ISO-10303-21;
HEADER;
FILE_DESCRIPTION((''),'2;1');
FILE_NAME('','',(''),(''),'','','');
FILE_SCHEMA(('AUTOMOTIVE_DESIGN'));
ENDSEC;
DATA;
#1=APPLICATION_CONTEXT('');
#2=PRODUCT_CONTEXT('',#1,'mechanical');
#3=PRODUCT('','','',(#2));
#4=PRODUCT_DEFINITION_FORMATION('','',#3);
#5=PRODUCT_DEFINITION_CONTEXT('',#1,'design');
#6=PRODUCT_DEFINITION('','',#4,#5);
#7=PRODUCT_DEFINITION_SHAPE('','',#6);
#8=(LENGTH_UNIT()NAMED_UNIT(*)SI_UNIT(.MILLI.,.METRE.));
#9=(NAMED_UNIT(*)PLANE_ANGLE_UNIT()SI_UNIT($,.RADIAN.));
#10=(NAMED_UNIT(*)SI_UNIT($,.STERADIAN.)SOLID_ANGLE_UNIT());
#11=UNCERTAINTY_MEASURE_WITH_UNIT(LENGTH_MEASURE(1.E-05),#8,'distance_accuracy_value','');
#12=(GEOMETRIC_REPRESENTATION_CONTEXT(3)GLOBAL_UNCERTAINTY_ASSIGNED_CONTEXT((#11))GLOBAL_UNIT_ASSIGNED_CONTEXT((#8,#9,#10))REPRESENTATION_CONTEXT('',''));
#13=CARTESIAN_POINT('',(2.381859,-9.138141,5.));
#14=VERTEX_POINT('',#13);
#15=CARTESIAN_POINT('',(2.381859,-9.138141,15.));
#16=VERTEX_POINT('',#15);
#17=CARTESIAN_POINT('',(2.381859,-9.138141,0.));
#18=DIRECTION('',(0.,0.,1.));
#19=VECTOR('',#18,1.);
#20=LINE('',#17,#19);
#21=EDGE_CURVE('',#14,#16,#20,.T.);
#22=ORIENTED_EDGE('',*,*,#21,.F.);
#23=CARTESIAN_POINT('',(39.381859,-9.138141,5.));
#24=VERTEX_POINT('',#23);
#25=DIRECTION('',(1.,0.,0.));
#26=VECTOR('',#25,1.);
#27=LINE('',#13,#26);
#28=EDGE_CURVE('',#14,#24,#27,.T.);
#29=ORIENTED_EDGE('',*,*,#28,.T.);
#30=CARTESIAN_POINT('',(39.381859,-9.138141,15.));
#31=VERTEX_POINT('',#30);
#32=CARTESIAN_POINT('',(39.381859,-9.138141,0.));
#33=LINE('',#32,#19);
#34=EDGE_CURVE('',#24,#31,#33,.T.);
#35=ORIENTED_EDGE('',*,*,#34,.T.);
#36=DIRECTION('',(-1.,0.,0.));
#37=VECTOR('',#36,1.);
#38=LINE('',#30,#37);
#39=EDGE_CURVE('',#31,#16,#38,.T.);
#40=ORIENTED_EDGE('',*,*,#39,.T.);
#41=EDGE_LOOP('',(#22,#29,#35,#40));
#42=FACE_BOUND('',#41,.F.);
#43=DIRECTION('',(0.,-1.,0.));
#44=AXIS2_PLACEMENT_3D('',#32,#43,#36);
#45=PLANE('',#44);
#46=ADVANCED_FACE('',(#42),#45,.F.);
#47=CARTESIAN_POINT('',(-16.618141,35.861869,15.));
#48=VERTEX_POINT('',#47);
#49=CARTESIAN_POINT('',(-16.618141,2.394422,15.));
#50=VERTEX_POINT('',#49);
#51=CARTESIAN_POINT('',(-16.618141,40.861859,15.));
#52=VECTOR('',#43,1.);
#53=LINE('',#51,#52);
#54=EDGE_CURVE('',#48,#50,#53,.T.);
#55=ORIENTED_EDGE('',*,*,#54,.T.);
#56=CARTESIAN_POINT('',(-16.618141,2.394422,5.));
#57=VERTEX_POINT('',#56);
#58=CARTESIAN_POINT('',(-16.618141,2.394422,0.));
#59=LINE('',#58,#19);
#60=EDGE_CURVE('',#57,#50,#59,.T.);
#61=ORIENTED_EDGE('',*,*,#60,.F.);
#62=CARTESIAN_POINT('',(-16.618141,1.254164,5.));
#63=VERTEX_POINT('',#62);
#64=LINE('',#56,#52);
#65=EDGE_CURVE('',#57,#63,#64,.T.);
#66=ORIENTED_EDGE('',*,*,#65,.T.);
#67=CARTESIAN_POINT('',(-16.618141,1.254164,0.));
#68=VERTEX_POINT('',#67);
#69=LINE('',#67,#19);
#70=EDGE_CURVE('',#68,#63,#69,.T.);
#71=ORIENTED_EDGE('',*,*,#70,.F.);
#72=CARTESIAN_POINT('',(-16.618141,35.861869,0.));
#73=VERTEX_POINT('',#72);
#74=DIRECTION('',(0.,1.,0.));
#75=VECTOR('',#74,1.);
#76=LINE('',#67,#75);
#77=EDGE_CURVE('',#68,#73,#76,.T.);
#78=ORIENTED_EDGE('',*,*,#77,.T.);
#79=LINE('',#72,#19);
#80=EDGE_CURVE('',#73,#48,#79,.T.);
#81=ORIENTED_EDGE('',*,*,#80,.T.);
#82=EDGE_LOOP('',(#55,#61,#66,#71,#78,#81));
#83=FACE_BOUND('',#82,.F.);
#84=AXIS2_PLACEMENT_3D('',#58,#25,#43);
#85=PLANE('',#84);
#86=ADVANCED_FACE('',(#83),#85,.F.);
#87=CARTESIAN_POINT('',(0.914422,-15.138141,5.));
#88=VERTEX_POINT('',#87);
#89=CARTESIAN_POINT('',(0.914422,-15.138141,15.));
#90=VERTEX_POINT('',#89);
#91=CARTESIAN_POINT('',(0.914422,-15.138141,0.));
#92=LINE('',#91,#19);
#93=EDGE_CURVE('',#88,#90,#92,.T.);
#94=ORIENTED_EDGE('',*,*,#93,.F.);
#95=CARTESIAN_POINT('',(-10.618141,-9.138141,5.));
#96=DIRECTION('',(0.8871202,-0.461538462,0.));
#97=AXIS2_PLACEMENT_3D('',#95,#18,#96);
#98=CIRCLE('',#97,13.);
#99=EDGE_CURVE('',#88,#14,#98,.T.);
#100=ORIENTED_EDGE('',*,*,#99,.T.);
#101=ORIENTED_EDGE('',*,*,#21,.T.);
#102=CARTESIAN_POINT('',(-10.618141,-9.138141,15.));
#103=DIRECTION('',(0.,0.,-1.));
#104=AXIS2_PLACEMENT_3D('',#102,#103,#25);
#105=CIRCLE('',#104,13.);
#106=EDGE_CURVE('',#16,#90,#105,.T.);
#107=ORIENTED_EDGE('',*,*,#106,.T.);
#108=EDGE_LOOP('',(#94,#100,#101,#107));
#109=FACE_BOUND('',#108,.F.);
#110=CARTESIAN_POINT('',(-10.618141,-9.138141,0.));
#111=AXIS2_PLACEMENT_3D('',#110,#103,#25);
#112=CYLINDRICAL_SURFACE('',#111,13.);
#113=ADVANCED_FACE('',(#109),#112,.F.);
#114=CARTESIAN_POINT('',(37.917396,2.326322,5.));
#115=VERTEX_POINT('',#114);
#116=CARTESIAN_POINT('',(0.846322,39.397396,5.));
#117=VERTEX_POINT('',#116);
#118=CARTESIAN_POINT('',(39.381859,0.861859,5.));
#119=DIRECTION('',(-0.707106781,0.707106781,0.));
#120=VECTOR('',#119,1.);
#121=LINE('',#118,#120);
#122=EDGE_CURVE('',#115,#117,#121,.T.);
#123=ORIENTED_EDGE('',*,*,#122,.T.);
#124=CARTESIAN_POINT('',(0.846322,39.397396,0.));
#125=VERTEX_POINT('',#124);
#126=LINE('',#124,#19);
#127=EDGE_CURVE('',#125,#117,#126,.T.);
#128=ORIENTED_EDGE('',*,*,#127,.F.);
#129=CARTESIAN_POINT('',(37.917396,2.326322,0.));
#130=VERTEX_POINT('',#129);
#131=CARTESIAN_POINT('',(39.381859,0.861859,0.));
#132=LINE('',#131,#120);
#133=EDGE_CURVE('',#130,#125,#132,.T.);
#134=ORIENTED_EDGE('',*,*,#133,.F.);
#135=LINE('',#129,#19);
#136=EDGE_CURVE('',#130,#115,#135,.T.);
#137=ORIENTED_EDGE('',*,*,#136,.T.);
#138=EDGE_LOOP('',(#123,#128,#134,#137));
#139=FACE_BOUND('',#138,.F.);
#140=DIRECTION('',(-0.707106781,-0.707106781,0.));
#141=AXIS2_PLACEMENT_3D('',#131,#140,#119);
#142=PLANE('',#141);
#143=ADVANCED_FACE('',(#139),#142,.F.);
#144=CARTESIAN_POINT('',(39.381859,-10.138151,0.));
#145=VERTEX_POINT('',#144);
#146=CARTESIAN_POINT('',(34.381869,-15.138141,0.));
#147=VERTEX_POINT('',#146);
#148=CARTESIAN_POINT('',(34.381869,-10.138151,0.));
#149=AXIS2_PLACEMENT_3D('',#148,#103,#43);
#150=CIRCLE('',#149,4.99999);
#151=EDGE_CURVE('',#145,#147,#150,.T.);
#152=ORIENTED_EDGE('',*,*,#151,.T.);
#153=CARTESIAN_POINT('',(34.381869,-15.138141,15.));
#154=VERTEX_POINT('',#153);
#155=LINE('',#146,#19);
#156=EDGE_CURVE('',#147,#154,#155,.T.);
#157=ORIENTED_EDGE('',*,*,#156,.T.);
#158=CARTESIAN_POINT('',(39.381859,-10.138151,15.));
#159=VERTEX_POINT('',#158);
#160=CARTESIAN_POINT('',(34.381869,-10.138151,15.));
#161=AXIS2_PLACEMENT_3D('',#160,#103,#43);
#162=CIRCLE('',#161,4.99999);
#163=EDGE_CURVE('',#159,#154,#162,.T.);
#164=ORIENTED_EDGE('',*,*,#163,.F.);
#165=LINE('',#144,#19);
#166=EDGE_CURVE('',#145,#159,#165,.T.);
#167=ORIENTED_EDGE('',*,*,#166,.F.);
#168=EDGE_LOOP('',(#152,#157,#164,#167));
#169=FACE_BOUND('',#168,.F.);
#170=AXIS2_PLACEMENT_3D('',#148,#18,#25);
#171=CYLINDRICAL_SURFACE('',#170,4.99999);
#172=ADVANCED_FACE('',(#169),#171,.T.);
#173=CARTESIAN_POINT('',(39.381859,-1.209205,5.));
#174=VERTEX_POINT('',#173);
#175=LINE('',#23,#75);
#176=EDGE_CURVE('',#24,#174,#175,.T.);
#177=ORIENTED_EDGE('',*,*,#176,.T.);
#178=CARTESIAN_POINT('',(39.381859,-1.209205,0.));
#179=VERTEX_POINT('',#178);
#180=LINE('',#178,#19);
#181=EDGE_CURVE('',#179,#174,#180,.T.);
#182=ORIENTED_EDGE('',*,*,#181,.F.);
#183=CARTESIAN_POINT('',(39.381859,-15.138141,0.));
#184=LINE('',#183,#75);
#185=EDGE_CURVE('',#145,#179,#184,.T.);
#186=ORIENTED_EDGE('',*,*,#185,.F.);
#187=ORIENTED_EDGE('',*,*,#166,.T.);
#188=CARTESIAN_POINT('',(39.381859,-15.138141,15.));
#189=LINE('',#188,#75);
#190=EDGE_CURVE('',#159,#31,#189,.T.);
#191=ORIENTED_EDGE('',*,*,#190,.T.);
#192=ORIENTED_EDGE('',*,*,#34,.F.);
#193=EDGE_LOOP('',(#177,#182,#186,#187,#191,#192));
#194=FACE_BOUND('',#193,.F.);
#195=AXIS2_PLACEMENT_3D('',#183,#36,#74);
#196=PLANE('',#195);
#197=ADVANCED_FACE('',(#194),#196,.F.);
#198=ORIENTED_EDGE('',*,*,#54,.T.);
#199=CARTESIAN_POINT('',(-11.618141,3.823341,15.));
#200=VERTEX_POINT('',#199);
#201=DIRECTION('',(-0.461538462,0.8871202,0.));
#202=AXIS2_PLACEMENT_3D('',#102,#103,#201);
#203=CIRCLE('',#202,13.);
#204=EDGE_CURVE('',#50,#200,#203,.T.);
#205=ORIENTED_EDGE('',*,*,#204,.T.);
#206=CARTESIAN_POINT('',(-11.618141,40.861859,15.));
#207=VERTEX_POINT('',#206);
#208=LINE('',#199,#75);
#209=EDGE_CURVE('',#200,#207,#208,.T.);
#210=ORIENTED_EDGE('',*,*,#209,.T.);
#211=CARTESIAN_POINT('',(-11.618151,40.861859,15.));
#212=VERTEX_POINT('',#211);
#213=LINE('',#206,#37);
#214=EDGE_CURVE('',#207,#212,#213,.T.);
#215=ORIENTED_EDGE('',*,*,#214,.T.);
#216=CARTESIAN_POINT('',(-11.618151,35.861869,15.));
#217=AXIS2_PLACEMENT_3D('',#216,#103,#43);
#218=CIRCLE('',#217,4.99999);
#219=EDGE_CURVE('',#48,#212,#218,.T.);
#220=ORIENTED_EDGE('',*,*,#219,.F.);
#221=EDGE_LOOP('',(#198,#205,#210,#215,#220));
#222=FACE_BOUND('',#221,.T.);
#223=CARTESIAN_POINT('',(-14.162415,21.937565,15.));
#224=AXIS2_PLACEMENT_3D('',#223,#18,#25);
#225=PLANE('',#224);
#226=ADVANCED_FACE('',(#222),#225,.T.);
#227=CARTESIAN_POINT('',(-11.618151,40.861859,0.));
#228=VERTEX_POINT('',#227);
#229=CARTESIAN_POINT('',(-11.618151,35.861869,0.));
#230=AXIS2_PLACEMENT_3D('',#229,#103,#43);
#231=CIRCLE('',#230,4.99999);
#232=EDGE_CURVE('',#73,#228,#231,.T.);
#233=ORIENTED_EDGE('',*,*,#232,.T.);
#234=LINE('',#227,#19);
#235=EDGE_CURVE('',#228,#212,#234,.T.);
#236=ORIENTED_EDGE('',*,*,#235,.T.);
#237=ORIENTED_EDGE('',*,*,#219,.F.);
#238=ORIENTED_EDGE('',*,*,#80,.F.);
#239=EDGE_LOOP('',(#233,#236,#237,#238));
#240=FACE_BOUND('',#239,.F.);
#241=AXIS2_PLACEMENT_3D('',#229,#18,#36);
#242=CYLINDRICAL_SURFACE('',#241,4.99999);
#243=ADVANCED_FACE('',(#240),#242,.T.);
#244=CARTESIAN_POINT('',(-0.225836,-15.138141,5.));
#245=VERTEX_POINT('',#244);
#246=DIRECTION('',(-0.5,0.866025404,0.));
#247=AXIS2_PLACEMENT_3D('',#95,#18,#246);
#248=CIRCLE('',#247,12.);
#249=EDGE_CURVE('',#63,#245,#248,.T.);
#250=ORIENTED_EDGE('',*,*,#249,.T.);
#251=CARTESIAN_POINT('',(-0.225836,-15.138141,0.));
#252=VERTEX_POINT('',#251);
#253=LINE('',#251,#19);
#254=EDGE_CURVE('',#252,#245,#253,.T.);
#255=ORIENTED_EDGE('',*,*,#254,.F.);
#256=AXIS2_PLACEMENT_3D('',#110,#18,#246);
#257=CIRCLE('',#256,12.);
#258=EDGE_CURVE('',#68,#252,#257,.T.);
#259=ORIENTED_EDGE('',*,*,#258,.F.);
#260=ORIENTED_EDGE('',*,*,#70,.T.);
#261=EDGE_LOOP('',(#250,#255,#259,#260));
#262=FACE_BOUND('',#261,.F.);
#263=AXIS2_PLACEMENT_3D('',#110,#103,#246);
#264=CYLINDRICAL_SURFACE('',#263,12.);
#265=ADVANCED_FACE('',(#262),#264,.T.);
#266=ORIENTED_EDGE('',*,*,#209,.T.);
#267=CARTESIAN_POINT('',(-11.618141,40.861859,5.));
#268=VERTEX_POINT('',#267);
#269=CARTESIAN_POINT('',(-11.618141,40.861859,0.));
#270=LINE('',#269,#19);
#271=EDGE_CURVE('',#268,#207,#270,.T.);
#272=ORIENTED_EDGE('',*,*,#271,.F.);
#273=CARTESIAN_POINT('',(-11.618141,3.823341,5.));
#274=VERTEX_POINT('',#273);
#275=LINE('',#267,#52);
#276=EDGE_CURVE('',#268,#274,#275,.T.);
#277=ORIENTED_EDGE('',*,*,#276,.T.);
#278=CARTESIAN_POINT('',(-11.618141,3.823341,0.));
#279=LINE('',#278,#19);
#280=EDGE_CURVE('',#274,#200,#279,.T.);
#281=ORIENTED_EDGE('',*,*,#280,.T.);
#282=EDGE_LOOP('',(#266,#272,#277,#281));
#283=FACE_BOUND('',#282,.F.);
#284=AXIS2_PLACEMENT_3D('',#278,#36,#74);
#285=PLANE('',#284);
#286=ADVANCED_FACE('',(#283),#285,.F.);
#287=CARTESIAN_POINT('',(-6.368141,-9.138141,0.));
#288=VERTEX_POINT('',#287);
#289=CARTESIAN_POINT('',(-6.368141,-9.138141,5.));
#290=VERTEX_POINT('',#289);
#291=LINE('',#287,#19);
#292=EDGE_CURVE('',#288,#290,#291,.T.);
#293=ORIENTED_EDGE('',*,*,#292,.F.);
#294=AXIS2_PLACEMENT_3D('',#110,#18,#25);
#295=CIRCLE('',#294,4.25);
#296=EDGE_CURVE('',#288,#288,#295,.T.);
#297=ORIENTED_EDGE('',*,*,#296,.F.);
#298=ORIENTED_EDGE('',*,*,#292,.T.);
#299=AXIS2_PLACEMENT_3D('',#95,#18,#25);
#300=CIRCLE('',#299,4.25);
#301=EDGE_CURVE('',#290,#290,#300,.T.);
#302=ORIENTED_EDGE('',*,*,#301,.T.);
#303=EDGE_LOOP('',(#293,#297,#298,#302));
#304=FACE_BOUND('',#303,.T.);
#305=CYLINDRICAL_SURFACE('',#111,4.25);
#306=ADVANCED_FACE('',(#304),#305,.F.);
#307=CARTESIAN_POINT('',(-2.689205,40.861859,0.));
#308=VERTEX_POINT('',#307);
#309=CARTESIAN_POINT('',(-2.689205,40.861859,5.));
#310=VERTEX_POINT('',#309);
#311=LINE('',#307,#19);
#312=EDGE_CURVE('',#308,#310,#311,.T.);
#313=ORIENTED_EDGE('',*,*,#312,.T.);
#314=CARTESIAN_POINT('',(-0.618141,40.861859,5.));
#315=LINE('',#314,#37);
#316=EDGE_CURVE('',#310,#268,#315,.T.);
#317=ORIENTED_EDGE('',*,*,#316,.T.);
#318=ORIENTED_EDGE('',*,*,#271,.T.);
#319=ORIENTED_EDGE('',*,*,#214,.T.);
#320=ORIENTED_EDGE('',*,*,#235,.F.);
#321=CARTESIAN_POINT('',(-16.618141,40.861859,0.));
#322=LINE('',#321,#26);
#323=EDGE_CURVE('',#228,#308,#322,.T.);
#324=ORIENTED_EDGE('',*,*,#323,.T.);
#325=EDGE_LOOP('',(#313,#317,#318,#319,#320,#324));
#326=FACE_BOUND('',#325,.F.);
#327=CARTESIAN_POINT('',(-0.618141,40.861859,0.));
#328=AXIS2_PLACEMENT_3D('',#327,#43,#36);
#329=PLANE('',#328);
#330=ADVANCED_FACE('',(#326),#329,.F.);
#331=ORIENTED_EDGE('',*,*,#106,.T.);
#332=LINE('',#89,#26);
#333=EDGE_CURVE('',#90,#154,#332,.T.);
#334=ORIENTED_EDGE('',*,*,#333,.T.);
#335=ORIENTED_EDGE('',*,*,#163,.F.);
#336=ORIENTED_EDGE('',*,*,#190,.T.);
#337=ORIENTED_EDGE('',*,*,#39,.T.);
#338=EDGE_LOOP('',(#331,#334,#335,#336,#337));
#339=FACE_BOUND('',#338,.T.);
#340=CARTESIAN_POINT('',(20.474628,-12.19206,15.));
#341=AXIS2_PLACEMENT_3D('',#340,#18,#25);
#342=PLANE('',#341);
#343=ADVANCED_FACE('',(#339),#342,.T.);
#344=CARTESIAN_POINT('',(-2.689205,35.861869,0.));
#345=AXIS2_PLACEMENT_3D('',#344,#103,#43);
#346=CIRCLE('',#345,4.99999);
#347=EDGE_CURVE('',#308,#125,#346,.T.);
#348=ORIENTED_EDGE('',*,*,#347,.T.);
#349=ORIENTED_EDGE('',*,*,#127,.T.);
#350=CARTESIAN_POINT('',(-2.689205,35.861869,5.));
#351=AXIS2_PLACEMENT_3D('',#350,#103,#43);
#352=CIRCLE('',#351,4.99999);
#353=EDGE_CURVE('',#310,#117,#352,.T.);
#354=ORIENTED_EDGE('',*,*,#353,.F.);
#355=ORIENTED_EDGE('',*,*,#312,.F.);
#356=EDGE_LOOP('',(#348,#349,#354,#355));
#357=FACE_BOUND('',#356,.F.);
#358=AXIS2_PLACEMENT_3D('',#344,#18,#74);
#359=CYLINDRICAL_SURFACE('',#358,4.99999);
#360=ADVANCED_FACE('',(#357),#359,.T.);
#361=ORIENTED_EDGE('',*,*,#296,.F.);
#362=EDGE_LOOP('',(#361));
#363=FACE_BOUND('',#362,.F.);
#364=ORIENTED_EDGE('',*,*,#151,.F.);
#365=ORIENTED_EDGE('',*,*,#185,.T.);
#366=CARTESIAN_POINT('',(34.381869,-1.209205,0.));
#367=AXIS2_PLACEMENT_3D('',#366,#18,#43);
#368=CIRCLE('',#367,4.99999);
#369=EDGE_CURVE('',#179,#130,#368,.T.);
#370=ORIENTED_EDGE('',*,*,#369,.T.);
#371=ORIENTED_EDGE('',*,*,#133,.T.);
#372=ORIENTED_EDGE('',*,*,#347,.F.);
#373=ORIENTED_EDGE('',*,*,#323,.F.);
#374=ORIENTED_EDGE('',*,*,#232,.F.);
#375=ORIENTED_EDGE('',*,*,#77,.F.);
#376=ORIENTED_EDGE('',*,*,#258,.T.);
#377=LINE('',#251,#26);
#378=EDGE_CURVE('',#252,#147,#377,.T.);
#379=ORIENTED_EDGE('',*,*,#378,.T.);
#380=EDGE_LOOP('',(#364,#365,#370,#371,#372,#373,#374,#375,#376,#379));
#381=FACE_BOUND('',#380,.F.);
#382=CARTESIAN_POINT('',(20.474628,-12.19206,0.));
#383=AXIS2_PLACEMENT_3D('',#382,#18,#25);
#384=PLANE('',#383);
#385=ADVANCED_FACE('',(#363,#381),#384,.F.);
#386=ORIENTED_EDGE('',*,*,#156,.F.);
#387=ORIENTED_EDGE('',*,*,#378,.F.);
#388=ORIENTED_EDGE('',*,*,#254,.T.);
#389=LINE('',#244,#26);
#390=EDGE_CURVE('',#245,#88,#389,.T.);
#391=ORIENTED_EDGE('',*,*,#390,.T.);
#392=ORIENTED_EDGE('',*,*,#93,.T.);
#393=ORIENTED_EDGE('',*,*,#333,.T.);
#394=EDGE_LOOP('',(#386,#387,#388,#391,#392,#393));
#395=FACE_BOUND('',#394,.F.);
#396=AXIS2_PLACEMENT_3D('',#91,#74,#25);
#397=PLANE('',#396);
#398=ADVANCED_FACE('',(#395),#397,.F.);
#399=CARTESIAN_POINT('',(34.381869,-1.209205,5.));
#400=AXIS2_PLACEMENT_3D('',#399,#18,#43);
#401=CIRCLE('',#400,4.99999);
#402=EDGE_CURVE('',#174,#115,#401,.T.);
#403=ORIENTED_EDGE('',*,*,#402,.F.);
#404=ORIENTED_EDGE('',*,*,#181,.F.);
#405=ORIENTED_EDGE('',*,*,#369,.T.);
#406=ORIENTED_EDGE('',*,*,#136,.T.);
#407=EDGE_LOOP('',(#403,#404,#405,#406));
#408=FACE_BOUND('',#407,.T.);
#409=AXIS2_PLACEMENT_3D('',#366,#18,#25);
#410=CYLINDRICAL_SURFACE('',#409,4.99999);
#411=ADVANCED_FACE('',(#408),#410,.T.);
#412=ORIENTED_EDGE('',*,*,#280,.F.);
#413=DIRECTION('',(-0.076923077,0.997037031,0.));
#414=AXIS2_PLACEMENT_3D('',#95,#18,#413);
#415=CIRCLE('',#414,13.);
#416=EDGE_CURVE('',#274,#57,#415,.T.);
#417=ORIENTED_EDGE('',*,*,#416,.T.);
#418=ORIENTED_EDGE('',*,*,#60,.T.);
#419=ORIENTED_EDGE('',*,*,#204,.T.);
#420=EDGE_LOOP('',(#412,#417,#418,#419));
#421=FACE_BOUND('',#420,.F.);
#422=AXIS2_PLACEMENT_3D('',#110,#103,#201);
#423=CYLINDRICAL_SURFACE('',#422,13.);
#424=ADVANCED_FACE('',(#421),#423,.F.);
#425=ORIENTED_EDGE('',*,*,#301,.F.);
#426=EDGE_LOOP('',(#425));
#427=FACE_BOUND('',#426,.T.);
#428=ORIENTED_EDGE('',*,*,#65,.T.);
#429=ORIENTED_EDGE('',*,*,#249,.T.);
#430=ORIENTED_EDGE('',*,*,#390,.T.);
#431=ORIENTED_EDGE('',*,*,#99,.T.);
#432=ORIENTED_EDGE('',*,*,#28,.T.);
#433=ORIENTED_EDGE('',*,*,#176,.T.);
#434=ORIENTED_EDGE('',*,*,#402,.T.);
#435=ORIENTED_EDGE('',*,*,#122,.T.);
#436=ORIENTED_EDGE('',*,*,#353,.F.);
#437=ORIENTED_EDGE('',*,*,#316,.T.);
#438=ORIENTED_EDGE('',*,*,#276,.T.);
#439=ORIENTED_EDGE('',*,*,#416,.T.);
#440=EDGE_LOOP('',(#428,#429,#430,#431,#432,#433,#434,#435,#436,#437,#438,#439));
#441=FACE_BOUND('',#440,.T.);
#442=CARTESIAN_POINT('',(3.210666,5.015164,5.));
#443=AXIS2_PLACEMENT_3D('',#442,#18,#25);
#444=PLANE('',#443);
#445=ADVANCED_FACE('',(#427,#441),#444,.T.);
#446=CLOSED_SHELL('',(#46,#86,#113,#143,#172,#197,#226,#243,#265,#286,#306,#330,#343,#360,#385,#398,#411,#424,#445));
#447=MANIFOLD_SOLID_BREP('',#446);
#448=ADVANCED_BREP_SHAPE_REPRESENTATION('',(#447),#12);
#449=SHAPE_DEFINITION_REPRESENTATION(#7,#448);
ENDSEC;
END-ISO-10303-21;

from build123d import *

# Parameters (mm, degrees)
F1_R     = 4.25
F2_DEPTH = 5
F3_DEPTH = 15
F4_R     = 4.99999


# Not quite as in the source:
# - a fillet or chamfer is up to 0.001 mm smaller than in the source, because OpenCascade refuses the exact size
# - a feature names something its author has since deleted; it is built from what else it names


with BuildPart() as f2:
    # F1 (on Top) → F2 (new body)
    with BuildSketch(Plane.XY):
        with BuildLine():
            Line((39.3818591636, 0.8618591636), (-0.6181408364, 0.8618591636))
            Line((-0.6181408364, 0.8618591636), (-0.6181408364, 40.8618591636))
            Line((-0.6181408364, 40.8618591636), (-11.6181408364, 40.8618591636))
            Line((-11.6181408364, 40.8618591636), (-11.6181408364, 3.8233405604))
            ThreePointArc((-11.6181408364, 3.8233405604), (-14.1903183566, 3.3614410672), (-16.6181408364, 2.3944217582))
            Line((-16.6181408364, 2.3944217582), (-16.6181408364, 1.254164009))
            ThreePointArc((-16.6181408364, 1.254164009), (-19.1034222107, -17.6234222107), (-0.225835991, -15.1381408364))
            Line((-0.225835991, -15.1381408364), (0.9144217582, -15.1381408364))
            ThreePointArc((0.9144217582, -15.1381408364), (2.0096719934, -12.2265616521), (2.3818591636, -9.1381408364))
            Line((2.3818591636, -9.1381408364), (39.3818591636, -9.1381408364))
            Line((39.3818591636, -9.1381408364), (39.3818591636, 0.8618591636))
        make_face()
        with Locations((-10.6181408364, -9.1381408364)):
            Circle(F1_R, mode=Mode.SUBTRACT)
        Polygon((-0.6181408364, 40.8618591636), (-0.6181408364, 0.8618591636), (39.3818591636, 0.8618591636), align=None)
    extrude(amount=F2_DEPTH)

    # F1 (on Top) → F3 (join)
    with BuildSketch(Plane.XY):
        with BuildLine():
            Line((39.3818591636, -15.1381408364), (39.3818591636, -9.1381408364))
            Line((39.3818591636, -9.1381408364), (2.3818591636, -9.1381408364))
            ThreePointArc((2.3818591636, -9.1381408364), (2.0096719934, -12.2265616521), (0.9144217582, -15.1381408364))
            Line((0.9144217582, -15.1381408364), (39.3818591636, -15.1381408364))
        make_face()
        with BuildLine():
            Line((-11.6181408364, 3.8233405604), (-11.6181408364, 40.8618591636))
            Line((-11.6181408364, 40.8618591636), (-16.6181408364, 40.8618591636))
            Line((-16.6181408364, 40.8618591636), (-16.6181408364, 2.3944217582))
            ThreePointArc((-16.6181408364, 2.3944217582), (-14.1903183566, 3.3614410672), (-11.6181408364, 3.8233405604))
        make_face()
    extrude(amount=F3_DEPTH)

    # F4 (radius 5 in the source; OpenCascade refuses exactly that, so slightly less here)
    f4_edges = [f2.edges().sort_by_distance(p)[0] for p in [
        (39.381859, -15.138141, 7.5),
        (-16.618141, 40.861859, 7.5),
        (39.381859, 0.861859, 2.5),
        (-0.618141, 40.861859, 2.5),
    ]]
    fillet(f4_edges, radius=F4_R)


solid = f2.part
